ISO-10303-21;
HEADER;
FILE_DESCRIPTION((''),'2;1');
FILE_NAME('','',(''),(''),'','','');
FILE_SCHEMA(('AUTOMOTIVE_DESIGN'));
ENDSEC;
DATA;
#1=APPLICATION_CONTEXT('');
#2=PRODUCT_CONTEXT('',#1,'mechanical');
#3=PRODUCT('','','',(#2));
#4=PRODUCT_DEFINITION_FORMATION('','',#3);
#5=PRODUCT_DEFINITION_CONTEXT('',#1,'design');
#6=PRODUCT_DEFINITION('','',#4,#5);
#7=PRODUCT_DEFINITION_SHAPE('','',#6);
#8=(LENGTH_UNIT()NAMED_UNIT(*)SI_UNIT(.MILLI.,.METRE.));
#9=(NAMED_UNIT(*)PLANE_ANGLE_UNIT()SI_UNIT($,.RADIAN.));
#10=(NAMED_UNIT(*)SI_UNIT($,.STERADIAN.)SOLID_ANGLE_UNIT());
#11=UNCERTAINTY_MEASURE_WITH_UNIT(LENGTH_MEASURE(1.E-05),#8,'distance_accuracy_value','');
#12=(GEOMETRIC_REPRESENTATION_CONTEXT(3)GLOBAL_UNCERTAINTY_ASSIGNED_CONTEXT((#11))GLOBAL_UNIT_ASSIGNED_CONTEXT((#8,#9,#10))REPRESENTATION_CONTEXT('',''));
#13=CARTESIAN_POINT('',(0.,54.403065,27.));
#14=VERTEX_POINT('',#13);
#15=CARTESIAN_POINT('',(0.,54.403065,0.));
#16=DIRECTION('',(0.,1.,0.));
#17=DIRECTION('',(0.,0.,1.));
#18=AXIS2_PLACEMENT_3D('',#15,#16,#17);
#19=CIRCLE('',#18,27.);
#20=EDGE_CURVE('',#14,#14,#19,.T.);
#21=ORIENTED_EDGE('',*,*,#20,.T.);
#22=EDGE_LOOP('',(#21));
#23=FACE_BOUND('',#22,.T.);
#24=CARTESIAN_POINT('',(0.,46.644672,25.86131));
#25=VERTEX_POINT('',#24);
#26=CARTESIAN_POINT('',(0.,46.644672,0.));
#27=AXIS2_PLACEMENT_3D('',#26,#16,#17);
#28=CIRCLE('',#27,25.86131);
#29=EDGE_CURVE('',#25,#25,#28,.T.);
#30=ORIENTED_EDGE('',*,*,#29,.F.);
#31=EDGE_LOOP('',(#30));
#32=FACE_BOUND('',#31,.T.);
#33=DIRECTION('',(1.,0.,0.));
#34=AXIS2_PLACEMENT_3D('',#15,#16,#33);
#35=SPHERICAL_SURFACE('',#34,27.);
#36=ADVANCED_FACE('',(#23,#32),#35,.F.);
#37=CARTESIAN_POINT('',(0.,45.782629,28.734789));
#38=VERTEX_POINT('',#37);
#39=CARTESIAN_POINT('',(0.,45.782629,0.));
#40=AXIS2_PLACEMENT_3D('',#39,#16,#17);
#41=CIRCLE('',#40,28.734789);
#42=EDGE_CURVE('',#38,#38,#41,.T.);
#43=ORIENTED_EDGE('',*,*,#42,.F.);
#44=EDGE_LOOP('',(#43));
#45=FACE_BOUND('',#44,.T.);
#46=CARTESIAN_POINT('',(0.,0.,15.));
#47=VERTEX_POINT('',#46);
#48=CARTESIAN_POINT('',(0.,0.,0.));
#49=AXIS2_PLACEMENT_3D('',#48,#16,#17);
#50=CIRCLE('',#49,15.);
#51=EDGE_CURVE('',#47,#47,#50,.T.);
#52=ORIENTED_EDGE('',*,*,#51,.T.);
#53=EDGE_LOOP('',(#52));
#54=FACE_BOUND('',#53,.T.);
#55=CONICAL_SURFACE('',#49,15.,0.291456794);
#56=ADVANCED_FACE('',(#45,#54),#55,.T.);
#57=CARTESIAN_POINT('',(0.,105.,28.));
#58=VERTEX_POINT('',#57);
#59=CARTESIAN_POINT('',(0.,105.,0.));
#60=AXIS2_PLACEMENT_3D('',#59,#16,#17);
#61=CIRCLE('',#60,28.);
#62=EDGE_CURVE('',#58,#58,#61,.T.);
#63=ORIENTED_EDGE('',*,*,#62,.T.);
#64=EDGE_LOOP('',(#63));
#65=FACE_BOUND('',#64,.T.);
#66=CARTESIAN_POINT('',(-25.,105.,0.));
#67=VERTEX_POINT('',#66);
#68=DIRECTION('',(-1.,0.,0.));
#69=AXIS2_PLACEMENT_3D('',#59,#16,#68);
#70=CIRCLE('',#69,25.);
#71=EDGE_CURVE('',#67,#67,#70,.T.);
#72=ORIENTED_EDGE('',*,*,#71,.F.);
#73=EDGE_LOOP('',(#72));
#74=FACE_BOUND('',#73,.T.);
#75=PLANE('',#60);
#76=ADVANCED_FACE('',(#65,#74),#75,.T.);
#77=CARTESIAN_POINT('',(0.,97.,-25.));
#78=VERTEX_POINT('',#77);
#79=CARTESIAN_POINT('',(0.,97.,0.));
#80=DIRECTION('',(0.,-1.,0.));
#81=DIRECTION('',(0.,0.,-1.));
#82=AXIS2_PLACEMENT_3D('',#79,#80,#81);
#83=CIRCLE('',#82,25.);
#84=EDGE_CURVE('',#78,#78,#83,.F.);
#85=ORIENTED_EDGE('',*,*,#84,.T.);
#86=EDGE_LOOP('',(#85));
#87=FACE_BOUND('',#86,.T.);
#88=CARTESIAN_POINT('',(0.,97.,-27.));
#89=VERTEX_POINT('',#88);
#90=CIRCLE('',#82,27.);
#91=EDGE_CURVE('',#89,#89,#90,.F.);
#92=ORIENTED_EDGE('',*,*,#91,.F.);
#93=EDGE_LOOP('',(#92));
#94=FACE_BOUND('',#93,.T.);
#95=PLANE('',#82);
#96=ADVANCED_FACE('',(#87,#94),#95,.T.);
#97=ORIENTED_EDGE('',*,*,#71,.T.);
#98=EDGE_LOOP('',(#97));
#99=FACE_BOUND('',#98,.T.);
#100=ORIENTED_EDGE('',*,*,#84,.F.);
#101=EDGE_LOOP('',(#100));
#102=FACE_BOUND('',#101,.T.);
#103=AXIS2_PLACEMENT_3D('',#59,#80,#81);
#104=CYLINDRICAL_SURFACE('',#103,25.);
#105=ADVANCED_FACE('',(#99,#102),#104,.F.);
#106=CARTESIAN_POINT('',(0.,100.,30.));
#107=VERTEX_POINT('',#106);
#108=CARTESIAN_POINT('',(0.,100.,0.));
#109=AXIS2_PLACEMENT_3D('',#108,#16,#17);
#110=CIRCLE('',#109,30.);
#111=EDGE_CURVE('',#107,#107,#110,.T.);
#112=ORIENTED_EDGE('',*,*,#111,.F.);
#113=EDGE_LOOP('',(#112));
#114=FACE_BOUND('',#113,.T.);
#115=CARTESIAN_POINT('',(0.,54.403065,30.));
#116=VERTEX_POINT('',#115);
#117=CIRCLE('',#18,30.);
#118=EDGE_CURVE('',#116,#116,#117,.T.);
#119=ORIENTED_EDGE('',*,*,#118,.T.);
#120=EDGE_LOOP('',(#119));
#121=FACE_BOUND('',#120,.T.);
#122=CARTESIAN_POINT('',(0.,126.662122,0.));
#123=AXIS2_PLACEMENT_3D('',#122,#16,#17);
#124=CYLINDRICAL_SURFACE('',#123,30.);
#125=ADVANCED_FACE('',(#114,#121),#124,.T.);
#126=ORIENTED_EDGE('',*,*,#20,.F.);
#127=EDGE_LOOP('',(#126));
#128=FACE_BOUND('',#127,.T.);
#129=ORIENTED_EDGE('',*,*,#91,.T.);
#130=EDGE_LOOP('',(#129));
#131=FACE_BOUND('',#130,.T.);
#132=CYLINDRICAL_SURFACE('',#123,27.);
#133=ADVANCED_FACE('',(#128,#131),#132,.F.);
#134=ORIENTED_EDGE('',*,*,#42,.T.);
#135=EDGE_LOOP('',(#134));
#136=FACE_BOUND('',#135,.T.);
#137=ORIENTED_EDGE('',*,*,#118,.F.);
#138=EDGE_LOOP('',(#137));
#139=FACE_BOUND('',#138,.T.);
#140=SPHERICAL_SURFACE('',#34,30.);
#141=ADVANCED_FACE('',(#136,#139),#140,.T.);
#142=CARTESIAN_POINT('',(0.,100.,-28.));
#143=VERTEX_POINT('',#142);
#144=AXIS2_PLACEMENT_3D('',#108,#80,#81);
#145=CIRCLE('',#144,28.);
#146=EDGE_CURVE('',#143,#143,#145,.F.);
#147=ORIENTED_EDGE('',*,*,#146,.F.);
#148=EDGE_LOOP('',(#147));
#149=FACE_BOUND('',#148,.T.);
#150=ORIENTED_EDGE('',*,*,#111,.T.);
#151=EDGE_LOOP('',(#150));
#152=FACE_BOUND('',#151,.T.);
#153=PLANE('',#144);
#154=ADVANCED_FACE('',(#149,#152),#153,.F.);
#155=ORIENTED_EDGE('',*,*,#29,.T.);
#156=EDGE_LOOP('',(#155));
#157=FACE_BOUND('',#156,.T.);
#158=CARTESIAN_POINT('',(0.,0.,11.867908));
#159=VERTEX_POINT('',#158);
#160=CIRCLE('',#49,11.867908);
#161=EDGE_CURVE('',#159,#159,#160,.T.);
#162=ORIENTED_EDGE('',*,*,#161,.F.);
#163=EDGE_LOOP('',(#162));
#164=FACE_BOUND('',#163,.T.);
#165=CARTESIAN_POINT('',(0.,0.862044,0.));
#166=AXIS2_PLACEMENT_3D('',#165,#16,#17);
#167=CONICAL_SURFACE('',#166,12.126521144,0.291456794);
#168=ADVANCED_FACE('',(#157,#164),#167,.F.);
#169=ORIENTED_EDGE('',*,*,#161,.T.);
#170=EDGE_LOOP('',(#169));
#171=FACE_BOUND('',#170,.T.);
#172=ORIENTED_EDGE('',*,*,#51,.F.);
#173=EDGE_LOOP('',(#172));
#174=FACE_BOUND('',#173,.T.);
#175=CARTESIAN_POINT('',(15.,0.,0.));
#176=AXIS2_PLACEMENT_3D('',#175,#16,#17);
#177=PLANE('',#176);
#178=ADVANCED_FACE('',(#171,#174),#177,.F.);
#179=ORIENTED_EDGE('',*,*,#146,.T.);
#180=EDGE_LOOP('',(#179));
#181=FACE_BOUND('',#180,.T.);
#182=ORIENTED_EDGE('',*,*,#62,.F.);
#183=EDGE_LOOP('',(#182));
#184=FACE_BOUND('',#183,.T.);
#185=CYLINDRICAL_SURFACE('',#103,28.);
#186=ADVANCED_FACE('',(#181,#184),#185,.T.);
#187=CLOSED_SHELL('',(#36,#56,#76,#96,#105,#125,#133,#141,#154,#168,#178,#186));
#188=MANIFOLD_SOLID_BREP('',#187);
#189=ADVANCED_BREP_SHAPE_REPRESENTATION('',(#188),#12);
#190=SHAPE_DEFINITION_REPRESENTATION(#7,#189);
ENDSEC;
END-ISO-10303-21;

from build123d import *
from build123d.topology import SkipClean

# Parameters (mm, degrees)
SKETCH2_R           = 28
SKETCH2_R_2         = 25
EXTRUDE_THIN1_DEPTH = 5


# Read off the part's stored shape, not the designer's step: Shell2
with BuildPart() as part:
    # Sketch1 → Revolve1 (revolve)
    with BuildSketch(Plane.XY, mode=Mode.PRIVATE) as revolve1_sk:
        with BuildLine():
            Line((0, 0), (0, 100))
            Line((0, 100), (30, 100))
            Line((30, 100), (30, 54.403065089))
            ThreePointArc((30, 54.403065089), (29.682011865, 50.046670749), (28.734788557, 45.782628522))
            Line((28.734788557, 45.782628522), (15, 0))
            Line((15, 0), (0, 0))
        make_face()
    revolve(revolve1_sk.sketch.rotate(Axis((0, 126.662122273, 0), (0, -1, 0)), 90), axis=Axis((0, 126.662122273, 0), (0, -1, 0)))

    # Sketch2 → Extrude-Thin1 (add)
    with BuildSketch(Plane(origin=(0, 100, 0), x_dir=(-1, 0, 0), z_dir=(0, 1, 0))):
        Circle(SKETCH2_R)
        Circle(SKETCH2_R_2, mode=Mode.SUBTRACT)
    extrude(amount=EXTRUDE_THIN1_DEPTH)

    # Shell2 outline → Shell2 (revolve, cut)
    with SkipClean():  # the faces are left unmerged after this step: merging them gives an invalid solid
        with BuildSketch(Plane.XY):
            with BuildLine():
                Line((25, 97), (25, 100))
                Line((25, 100), (0, 100))
                Line((0, 100), (0, 0))
                Line((0, 0), (11.867908047, 0))
                Line((11.867908047, 0), (25.861309693, 46.644672153))
                ThreePointArc((25.861309693, 46.644672153), (26.713810678, 50.482310183), (27, 54.403065116))
                Line((27, 54.403065116), (27, 97))
                Line((27, 97), (25, 97))
            make_face()
        revolve(axis=Axis((0, 0, 0), (0, 1, 0)), mode=Mode.SUBTRACT)


solid = part.part
